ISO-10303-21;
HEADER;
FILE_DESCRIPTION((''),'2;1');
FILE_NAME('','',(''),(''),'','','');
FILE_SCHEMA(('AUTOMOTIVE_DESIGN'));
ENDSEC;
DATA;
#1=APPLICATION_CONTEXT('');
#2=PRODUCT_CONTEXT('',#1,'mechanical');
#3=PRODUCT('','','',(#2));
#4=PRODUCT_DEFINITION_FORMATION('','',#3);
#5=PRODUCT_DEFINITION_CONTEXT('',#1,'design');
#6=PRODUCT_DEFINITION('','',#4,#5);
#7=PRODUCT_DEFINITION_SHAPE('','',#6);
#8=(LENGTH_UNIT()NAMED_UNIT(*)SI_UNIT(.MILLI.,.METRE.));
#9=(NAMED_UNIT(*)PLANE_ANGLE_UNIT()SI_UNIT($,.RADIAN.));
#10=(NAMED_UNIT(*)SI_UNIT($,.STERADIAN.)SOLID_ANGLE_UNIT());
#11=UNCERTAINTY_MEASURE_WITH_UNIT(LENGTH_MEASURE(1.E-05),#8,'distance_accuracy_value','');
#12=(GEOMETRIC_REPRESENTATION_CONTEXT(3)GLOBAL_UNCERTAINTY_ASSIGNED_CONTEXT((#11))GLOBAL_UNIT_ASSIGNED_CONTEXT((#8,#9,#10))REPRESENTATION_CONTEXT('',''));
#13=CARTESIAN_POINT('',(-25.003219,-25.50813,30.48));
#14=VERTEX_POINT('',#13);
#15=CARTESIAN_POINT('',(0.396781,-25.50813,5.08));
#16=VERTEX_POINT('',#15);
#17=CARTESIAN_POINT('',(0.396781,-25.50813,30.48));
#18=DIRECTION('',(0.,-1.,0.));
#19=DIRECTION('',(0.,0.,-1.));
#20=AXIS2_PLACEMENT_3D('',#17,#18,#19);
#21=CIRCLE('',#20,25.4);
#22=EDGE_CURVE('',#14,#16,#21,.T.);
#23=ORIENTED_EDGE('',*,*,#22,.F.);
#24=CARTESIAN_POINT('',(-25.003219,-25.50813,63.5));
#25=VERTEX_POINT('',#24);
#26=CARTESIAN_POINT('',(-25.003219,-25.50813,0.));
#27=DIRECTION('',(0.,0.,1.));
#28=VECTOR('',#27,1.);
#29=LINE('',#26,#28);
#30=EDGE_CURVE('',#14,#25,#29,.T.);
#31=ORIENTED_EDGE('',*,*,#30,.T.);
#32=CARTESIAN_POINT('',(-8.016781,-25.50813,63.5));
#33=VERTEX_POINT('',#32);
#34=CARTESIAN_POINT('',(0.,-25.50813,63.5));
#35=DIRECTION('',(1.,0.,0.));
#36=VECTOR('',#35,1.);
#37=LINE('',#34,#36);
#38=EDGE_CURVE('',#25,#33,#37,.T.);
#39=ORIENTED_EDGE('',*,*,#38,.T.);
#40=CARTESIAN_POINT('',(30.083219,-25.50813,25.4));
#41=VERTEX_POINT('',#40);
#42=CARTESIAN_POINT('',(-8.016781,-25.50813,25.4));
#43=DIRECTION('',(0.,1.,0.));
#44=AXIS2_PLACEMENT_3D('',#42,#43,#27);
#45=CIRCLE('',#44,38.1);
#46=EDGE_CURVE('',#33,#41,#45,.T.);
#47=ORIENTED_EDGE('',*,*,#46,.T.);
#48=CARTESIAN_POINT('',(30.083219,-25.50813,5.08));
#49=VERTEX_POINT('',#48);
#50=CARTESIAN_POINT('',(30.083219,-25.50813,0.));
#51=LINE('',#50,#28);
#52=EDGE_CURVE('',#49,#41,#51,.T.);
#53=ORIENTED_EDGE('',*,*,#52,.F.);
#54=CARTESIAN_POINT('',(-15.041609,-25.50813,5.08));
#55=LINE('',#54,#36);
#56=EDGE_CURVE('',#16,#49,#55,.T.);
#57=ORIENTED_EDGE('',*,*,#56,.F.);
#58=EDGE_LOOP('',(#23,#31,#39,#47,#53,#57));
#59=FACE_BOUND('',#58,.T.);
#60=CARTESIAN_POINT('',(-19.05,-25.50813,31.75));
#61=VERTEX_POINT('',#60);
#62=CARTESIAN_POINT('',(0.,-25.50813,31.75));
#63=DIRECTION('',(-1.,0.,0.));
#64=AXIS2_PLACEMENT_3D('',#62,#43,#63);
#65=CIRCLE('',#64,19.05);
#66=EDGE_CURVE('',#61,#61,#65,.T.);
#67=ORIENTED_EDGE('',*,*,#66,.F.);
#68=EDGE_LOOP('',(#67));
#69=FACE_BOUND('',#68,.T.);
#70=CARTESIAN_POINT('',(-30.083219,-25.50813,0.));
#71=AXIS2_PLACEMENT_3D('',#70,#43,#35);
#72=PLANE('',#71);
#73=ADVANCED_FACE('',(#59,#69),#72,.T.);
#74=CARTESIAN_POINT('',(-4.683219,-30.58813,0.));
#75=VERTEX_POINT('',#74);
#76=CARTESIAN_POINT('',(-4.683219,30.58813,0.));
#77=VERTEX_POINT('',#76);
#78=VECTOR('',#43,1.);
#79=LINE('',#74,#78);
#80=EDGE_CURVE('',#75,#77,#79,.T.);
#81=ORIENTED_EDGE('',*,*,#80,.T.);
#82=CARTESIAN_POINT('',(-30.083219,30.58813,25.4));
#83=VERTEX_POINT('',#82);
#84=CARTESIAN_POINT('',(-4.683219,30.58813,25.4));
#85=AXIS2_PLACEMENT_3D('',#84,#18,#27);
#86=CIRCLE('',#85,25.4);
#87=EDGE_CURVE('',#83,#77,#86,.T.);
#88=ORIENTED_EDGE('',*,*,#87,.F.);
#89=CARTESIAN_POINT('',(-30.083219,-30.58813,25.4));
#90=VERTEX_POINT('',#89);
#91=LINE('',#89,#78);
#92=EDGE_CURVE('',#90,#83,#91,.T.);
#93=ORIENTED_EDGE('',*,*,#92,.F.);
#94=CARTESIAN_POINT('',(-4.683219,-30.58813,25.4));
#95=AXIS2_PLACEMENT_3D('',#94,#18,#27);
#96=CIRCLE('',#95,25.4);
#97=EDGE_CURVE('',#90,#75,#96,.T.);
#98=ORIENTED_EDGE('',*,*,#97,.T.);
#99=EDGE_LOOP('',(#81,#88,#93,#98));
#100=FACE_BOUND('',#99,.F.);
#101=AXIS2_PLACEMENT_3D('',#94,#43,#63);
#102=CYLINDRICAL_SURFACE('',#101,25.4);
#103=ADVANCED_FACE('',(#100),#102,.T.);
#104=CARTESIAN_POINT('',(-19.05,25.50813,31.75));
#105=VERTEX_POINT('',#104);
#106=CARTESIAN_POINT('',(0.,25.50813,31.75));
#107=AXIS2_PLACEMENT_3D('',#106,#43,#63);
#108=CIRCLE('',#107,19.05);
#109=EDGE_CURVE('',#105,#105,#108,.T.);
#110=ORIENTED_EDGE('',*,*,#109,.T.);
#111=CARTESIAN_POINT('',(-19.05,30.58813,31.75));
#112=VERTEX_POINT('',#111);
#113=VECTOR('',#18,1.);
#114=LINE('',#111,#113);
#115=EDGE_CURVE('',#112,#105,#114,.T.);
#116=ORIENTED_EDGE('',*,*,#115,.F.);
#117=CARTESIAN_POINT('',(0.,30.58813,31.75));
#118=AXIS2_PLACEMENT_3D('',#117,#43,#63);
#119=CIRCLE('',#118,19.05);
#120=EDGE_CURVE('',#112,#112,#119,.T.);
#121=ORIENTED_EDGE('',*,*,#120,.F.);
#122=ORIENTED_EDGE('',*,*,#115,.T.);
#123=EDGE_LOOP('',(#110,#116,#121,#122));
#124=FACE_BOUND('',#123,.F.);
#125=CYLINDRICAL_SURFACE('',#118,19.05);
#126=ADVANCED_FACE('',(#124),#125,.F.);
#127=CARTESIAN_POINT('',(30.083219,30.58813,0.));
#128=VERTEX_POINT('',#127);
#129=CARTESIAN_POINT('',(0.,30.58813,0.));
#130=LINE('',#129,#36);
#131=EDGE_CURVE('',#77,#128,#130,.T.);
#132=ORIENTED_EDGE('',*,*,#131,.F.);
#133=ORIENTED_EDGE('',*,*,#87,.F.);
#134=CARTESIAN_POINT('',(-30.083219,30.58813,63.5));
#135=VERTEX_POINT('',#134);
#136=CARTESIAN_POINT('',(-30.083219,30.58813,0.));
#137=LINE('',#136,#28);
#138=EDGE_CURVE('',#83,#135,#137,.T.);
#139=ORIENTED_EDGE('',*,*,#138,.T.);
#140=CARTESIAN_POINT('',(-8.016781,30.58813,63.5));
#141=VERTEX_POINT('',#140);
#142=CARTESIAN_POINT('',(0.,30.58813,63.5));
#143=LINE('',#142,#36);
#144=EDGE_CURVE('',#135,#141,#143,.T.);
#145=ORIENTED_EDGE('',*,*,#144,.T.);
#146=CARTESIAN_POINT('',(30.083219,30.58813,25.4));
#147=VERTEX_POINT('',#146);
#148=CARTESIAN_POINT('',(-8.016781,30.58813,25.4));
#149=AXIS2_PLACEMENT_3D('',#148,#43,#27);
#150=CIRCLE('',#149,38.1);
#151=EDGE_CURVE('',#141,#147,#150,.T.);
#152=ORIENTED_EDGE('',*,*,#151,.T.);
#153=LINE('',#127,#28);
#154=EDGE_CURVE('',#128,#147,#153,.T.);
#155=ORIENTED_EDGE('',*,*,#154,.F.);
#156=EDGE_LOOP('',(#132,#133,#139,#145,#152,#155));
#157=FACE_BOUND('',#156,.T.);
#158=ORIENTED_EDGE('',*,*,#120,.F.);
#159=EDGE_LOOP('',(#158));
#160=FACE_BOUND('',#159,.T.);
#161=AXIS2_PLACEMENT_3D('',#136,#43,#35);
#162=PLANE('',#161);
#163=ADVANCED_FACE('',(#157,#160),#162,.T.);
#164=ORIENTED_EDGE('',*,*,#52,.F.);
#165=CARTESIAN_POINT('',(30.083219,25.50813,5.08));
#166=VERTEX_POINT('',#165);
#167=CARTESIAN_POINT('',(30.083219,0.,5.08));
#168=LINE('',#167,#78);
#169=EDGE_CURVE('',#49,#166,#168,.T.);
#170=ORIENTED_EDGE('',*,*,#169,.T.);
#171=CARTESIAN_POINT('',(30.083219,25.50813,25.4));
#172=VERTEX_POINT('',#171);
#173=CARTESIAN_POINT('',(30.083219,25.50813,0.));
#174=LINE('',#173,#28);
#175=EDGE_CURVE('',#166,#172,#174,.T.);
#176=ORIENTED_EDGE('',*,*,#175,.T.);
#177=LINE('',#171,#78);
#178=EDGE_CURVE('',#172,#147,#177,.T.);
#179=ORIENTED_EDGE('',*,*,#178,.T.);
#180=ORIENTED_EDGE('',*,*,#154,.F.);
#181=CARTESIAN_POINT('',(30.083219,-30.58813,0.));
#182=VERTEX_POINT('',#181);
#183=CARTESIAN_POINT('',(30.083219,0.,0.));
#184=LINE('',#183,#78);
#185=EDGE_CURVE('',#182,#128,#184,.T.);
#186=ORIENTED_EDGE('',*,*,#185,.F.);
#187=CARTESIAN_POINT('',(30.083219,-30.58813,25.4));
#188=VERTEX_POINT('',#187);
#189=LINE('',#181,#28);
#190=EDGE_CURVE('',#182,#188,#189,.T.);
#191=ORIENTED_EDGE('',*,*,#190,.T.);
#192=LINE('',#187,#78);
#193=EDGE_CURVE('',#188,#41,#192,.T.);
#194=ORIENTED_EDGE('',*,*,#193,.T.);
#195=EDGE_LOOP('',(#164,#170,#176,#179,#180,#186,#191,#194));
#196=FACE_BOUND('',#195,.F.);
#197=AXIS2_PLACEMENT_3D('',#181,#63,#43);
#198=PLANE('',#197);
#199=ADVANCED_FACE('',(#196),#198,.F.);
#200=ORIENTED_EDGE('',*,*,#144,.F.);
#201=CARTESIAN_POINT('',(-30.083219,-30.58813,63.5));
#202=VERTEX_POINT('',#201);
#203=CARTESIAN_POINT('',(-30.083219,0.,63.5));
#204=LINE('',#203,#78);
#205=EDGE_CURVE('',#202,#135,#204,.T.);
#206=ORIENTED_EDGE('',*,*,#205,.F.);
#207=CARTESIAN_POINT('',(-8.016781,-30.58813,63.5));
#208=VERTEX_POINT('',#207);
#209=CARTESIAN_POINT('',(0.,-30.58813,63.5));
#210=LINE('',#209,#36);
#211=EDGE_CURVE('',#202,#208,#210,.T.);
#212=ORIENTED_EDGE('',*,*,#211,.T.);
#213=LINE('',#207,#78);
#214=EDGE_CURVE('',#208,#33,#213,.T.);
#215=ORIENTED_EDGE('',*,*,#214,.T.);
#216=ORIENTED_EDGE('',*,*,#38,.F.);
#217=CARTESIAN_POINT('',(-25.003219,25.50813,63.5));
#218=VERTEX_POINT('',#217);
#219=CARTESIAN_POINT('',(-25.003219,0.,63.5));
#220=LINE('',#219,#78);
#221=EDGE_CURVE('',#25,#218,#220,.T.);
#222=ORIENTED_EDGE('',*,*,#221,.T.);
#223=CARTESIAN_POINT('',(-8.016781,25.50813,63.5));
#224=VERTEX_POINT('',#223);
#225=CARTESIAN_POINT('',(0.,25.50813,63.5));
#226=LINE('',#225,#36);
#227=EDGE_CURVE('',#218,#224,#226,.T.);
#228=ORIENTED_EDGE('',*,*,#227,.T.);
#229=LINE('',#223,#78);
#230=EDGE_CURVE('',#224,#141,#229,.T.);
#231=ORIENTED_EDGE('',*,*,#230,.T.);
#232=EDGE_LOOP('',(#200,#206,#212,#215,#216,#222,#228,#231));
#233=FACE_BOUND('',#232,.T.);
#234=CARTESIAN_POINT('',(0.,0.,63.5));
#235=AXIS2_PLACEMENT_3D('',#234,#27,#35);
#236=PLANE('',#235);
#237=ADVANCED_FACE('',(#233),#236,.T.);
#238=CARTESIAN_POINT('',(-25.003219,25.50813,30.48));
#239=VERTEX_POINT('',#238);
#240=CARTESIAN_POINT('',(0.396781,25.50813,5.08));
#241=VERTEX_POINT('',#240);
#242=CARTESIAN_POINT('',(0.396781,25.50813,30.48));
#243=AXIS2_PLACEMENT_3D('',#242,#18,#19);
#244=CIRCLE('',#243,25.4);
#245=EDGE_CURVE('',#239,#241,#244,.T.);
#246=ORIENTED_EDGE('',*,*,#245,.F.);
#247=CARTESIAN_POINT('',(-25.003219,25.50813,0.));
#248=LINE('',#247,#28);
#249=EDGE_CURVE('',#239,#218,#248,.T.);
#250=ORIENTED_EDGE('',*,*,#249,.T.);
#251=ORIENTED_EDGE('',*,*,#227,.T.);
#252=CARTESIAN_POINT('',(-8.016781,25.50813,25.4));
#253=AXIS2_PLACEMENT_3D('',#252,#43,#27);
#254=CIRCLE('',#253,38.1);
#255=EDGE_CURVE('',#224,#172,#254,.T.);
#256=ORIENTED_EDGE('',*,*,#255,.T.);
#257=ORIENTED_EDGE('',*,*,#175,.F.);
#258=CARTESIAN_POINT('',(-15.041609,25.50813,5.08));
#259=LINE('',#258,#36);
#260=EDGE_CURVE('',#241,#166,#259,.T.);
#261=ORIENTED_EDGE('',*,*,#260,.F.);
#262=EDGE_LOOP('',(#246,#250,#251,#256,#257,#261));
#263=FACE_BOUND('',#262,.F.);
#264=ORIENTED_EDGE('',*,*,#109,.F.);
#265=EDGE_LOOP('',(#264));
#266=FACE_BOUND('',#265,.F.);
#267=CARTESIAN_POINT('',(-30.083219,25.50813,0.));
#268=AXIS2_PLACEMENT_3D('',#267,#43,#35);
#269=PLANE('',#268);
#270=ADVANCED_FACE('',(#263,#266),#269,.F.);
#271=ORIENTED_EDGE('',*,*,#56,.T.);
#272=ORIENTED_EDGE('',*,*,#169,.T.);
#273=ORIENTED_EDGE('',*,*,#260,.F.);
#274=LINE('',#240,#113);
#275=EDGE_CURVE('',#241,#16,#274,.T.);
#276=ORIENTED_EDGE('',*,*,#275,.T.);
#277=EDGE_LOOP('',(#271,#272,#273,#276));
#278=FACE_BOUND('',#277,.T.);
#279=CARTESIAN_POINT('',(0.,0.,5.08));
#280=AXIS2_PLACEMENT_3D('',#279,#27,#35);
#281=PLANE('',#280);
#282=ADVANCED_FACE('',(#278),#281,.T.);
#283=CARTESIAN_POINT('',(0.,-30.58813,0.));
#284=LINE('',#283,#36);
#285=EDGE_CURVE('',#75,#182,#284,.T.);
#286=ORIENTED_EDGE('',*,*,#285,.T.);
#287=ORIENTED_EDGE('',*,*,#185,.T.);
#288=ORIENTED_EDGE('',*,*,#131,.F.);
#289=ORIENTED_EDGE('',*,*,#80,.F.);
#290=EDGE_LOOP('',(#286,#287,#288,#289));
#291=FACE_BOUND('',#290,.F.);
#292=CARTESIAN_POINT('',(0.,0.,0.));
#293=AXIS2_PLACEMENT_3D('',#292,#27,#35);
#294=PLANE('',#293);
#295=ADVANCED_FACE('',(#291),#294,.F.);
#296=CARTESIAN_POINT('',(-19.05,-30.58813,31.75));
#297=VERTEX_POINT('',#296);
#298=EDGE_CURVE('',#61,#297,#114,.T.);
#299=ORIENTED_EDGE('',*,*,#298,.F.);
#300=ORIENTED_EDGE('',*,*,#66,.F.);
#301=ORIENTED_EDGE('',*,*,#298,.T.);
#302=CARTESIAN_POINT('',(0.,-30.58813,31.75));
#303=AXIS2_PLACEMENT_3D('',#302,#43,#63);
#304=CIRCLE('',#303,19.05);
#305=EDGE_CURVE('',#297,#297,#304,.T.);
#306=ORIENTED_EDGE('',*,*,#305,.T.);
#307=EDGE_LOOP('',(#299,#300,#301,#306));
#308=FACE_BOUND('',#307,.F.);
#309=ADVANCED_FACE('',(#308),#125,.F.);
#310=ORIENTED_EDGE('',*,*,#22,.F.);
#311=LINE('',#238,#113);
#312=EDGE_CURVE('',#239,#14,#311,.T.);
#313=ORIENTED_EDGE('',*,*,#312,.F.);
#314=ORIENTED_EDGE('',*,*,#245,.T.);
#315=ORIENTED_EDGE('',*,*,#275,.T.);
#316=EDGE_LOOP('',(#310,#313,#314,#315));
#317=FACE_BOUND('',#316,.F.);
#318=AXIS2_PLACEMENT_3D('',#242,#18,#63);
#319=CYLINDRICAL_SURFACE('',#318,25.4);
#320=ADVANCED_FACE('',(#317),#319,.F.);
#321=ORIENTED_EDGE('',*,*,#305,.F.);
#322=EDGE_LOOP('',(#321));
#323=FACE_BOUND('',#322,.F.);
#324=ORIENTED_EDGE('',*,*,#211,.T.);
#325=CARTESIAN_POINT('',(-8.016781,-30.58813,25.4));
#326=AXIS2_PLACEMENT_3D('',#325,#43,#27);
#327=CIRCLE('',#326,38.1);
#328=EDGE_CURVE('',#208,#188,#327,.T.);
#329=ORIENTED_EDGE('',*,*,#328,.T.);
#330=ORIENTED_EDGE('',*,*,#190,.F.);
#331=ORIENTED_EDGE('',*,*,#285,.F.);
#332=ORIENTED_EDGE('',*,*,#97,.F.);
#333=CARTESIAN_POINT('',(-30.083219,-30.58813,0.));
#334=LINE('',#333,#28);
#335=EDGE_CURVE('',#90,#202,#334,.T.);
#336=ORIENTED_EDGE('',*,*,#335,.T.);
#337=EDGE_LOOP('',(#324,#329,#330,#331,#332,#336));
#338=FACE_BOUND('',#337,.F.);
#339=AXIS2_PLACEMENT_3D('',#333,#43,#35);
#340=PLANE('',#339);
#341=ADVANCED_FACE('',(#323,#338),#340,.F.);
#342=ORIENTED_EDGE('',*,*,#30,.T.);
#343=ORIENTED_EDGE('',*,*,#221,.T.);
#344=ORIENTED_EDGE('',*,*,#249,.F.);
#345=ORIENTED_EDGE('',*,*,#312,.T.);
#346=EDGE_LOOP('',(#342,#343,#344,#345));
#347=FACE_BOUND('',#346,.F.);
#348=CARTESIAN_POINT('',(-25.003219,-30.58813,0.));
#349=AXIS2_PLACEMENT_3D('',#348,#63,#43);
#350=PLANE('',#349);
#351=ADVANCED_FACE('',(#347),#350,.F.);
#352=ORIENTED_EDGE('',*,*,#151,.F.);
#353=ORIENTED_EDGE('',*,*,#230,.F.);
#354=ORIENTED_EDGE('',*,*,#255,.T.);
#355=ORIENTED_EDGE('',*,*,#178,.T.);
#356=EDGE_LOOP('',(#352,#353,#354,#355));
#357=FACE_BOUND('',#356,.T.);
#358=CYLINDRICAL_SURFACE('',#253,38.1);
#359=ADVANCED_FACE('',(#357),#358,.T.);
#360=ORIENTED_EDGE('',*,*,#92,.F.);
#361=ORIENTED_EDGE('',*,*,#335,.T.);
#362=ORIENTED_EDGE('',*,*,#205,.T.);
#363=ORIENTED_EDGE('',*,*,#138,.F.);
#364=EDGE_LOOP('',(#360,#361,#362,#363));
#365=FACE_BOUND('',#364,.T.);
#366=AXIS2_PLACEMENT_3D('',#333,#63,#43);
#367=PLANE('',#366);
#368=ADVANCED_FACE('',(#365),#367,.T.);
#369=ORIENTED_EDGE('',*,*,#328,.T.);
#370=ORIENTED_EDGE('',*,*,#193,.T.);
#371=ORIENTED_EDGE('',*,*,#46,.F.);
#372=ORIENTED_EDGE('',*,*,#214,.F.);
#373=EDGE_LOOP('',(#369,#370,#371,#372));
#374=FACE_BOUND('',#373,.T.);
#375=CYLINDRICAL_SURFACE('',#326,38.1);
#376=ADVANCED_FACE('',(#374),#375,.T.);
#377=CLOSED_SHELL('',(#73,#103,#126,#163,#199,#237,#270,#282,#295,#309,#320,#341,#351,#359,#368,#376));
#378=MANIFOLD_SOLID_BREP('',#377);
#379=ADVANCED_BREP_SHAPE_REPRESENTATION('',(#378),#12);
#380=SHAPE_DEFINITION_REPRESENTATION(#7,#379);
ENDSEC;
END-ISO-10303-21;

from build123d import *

# Parameters (mm, degrees)
F0_W     = 60.1664371789
F0_H     = 61.1762590706
F1_DEPTH = 63.5
F2_T     = -5.08
F3_R     = 19.05
F4_DEPTH = 61.1762590706
F5_R     = 38.1
F7_R     = 25.4


# Not quite as in the source:
# - a feature of the source that left no trace in its solid (it failed there, or was rolled back) is left out


with BuildPart() as f1:
    # F0 (on Top) → F1 (new body)
    with BuildSketch(Plane.XY):
        Rectangle(F0_W, F0_H)
    extrude(amount=F1_DEPTH)

    # F2
    f2_openings = [f1.faces().sort_by_distance(p)[0] for p in [
        (30.083219, 0, 31.75),
        (0, 0, 63.5),
    ]]
    offset(amount=F2_T, openings=f2_openings)

    # F3 (on face) → F4 (cut, through all)
    with BuildSketch(Plane(origin=(0, 30.5881295353, 0), x_dir=(-1, 0, 0), z_dir=(0, 1, 0))):
        with Locations((0, 31.75)):
            Circle(F3_R)
    extrude(amount=-F4_DEPTH, mode=Mode.SUBTRACT)

    # F5
    f5_edges = [f1.edges().sort_by_distance(p)[0] for p in [
        (30.083219, -28.04813, 63.5),
        (30.083219, 28.04813, 63.5),
    ]]
    fillet(f5_edges, radius=F5_R)

    # F7
    f7_edges = [f1.edges().sort_by_distance(p)[0] for p in [
        (-30.083219, 0, 0),
        (-25.003219, 0, 5.08),
    ]]
    fillet(f7_edges, radius=F7_R)


solid = f1.part
